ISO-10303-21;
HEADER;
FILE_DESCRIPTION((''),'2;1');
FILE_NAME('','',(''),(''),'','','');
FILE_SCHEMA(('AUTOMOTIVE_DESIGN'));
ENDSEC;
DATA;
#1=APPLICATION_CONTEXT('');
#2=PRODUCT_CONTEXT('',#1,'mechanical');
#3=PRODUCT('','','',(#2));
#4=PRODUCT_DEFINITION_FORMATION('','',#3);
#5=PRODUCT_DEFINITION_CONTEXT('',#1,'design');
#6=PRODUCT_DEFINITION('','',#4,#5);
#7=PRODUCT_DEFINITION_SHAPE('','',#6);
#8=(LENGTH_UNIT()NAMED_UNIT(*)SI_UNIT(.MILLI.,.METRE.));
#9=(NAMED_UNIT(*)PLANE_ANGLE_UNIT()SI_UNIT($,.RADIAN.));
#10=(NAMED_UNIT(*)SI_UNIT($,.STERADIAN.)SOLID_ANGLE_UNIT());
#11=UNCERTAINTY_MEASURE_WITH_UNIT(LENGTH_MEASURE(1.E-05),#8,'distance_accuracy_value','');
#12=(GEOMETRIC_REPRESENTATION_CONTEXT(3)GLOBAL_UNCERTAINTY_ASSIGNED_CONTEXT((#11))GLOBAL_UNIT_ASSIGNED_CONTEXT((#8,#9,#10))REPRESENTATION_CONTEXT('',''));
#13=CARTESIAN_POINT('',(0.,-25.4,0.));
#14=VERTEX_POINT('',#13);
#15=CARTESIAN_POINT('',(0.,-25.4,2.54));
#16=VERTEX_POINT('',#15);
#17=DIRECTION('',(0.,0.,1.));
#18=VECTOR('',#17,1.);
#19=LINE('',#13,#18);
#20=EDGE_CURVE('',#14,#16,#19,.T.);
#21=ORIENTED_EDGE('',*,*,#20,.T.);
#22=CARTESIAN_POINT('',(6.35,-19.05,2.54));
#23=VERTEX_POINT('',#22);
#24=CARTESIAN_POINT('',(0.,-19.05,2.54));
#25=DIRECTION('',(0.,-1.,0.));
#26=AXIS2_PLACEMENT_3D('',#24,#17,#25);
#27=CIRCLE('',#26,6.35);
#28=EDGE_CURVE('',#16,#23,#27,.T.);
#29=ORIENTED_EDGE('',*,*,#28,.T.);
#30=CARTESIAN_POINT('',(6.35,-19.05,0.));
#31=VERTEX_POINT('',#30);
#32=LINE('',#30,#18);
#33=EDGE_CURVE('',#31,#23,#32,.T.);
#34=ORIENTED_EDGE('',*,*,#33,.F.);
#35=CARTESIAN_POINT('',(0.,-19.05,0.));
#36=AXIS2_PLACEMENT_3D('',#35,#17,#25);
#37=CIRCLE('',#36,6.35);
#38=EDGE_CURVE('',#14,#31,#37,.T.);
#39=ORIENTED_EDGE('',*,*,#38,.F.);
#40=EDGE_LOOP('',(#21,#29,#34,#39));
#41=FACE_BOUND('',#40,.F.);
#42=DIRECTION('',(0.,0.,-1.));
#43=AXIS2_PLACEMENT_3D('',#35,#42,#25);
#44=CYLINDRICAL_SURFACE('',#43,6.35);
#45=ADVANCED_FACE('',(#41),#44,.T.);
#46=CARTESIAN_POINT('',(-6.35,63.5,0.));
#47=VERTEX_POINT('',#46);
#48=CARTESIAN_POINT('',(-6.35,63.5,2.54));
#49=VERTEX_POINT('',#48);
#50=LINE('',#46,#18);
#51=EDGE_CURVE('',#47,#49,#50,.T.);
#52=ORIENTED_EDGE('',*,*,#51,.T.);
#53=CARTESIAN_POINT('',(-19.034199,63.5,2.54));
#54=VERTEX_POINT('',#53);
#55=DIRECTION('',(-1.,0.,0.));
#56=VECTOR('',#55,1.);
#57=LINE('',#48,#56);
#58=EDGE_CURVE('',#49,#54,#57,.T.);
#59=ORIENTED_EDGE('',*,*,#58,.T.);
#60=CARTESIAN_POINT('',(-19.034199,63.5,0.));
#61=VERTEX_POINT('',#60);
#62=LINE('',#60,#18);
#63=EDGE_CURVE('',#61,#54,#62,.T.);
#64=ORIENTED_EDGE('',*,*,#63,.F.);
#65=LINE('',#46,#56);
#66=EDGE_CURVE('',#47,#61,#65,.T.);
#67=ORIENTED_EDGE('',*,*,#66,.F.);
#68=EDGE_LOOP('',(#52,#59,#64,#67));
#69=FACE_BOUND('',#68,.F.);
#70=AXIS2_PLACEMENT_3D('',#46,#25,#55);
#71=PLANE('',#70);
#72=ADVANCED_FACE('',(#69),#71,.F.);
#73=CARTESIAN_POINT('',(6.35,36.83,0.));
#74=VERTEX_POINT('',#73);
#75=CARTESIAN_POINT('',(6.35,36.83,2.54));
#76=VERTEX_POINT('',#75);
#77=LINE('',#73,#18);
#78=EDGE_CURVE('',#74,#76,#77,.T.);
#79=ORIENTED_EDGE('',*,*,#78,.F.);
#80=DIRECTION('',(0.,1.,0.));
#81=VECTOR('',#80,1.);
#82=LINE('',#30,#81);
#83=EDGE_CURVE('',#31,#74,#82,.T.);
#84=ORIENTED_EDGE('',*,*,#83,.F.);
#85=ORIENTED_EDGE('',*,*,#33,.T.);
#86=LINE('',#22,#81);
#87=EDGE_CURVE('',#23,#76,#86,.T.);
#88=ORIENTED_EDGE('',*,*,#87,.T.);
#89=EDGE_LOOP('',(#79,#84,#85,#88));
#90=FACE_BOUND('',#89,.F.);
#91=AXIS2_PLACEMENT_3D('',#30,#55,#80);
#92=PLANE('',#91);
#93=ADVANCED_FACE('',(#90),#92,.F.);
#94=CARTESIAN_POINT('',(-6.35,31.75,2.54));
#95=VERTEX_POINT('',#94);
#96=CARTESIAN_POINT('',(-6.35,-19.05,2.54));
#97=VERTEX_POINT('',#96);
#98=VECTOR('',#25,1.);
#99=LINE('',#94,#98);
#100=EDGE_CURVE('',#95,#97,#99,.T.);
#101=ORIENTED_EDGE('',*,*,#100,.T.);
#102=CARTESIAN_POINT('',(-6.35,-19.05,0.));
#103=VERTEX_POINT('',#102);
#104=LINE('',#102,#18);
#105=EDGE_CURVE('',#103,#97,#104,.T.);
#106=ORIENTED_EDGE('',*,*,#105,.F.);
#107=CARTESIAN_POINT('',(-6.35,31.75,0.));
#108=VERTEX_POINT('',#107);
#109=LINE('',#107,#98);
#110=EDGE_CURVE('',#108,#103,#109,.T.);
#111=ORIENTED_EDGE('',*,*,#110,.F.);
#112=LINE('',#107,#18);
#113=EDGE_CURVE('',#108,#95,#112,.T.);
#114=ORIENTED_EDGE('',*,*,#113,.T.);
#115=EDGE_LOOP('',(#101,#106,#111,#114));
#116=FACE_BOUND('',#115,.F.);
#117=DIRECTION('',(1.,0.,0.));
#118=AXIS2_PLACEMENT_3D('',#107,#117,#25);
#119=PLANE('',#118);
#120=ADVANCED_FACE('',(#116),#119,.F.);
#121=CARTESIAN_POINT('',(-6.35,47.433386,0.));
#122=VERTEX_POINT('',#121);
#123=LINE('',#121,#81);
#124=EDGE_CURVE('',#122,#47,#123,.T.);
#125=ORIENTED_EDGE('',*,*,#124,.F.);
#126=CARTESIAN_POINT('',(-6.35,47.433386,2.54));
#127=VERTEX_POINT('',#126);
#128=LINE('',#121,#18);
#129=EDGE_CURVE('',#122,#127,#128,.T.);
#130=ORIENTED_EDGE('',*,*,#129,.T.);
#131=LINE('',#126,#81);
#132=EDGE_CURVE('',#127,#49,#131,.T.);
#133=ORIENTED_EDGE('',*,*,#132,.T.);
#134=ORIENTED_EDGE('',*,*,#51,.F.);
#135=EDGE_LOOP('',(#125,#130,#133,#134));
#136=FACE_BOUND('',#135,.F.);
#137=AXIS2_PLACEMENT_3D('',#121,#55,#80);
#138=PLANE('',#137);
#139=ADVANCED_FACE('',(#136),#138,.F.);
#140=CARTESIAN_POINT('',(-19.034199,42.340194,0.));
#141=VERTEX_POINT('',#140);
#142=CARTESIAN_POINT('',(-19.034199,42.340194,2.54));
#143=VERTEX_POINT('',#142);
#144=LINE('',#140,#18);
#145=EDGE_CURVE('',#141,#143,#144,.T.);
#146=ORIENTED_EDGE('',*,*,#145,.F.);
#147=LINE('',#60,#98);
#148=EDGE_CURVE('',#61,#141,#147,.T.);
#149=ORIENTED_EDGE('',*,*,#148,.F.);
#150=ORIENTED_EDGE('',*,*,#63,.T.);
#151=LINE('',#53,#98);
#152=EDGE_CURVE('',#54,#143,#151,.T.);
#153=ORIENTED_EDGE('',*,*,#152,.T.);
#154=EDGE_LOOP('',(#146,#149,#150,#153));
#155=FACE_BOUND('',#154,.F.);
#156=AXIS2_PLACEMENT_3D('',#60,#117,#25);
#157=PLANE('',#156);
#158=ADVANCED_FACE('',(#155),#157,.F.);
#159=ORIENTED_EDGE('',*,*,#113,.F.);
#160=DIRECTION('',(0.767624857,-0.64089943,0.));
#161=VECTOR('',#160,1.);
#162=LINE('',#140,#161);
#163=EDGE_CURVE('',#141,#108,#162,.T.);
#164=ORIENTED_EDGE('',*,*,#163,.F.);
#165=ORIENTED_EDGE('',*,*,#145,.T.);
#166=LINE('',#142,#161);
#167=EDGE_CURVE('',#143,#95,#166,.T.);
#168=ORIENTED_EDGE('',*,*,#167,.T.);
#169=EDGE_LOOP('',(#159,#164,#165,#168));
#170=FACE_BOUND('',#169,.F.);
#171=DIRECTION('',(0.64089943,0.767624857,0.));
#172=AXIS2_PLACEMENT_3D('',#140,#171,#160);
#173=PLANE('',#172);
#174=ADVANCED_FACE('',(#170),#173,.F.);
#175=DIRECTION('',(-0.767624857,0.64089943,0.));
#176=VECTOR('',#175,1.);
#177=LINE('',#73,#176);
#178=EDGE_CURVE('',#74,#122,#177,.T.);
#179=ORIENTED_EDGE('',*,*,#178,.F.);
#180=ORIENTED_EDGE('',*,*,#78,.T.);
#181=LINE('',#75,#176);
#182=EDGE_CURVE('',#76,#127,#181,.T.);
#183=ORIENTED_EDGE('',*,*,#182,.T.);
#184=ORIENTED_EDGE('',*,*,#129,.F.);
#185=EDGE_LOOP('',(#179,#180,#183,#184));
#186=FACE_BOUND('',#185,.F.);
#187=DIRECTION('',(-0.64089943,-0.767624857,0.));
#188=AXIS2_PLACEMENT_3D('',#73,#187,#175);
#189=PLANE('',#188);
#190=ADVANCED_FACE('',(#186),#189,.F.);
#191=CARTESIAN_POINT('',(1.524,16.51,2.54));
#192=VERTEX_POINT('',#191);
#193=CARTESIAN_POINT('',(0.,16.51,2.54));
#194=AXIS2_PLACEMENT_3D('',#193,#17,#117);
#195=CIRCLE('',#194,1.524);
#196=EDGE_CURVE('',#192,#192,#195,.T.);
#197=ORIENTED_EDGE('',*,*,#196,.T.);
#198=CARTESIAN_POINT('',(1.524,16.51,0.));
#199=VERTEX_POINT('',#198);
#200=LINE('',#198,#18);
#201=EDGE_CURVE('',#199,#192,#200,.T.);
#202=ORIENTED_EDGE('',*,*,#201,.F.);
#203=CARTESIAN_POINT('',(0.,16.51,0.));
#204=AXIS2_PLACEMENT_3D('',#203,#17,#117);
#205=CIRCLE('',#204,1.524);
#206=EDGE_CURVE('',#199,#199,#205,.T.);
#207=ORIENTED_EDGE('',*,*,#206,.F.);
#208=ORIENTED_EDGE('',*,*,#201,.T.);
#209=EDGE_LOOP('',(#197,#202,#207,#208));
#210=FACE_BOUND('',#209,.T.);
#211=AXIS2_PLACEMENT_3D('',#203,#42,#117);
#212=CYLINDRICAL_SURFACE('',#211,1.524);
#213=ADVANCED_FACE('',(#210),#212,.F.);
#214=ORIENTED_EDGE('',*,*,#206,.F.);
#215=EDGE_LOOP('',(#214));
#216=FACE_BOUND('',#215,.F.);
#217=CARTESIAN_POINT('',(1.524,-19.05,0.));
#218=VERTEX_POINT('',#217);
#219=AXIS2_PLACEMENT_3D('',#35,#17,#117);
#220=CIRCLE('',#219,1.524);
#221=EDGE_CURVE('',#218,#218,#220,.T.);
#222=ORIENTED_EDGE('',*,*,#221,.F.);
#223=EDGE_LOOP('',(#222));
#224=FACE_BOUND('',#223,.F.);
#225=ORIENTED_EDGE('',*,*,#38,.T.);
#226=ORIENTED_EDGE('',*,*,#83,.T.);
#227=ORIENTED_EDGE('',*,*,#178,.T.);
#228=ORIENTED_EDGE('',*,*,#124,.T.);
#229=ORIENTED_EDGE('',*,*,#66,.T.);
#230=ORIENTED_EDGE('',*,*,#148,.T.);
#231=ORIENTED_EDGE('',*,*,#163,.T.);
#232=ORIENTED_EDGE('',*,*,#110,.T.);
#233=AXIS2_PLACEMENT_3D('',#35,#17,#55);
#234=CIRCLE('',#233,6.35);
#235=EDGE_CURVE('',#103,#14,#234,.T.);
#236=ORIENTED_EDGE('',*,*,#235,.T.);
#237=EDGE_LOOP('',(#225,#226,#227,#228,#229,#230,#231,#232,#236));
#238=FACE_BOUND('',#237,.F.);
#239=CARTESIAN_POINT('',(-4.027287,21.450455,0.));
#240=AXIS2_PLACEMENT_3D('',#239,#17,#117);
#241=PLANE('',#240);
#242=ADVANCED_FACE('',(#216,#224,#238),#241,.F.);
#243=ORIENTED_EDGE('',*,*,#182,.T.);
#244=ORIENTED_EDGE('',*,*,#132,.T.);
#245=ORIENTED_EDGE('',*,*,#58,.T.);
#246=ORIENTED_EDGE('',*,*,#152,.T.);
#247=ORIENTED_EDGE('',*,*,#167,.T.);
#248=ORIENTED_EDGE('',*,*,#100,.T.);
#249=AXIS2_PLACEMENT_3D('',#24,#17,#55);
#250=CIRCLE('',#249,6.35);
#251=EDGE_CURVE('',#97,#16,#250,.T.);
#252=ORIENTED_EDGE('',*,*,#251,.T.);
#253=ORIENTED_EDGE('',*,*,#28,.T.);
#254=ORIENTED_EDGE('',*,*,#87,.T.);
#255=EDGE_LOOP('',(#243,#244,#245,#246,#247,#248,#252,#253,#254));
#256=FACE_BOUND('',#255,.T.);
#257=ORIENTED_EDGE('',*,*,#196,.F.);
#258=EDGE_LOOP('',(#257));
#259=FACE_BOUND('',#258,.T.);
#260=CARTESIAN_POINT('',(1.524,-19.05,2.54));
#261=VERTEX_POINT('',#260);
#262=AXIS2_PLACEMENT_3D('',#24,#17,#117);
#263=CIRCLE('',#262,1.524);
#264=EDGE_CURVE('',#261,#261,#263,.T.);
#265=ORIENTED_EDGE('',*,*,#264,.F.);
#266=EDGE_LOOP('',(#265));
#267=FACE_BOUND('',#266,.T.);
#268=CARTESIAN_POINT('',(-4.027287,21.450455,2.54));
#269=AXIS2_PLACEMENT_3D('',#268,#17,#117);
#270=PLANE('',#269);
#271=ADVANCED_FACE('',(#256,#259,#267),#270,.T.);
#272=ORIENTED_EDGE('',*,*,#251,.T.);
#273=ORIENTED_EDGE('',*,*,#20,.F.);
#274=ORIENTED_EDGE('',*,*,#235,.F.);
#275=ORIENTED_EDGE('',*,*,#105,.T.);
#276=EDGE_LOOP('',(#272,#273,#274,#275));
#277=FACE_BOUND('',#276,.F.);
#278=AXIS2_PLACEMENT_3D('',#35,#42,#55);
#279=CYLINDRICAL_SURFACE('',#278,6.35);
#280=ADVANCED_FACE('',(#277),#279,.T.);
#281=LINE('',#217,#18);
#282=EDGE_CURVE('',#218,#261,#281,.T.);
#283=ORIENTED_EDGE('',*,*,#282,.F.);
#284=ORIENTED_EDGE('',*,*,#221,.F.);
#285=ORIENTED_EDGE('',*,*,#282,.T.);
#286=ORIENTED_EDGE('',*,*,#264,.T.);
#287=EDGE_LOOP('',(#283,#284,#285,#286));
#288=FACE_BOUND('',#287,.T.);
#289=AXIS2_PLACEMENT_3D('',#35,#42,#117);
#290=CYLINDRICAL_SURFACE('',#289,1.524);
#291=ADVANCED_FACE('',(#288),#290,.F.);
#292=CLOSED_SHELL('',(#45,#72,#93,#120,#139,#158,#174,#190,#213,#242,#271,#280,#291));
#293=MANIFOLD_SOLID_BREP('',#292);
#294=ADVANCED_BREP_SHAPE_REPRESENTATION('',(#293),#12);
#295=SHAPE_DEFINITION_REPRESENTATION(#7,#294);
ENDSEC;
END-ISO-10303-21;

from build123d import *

# Parameters (mm, degrees)
F0_R     = 1.524
F1_DEPTH = 2.54


# Not quite as in the source:
# - a feature names something its author has since deleted; it is built from what else it names


with BuildPart() as f1:
    # F0 (on Top) → F1 (new body)
    with BuildSketch(Plane.XY):
        with BuildLine():
            Line((-19.0341994166, 42.3401940286), (-6.35, 31.75))
            Line((-6.35, 31.75), (-6.35, -19.05))
            ThreePointArc((-6.35, -19.05), (-4.4901280605, -23.5401280605), (0, -25.4))
            ThreePointArc((0, -25.4), (4.4901280605, -23.5401280605), (6.35, -19.05))
            Line((6.35, -19.05), (6.35, 36.83))
            Line((6.35, 36.83), (-6.35, 47.4333861299))
            Line((-6.35, 47.4333861299), (-6.35, 57.15))
            Line((-6.35, 57.15), (-6.35, 63.5))
            Line((-6.35, 63.5), (-19.0341994166, 63.5))
            Line((-19.0341994166, 63.5), (-19.0341994166, 42.3401940286))
        make_face()
        with Locations((0, -19.05)):
            Circle(F0_R, mode=Mode.SUBTRACT)
        with Locations((0, 16.51)):
            Circle(F0_R, mode=Mode.SUBTRACT)
    extrude(amount=F1_DEPTH)


solid = f1.part
